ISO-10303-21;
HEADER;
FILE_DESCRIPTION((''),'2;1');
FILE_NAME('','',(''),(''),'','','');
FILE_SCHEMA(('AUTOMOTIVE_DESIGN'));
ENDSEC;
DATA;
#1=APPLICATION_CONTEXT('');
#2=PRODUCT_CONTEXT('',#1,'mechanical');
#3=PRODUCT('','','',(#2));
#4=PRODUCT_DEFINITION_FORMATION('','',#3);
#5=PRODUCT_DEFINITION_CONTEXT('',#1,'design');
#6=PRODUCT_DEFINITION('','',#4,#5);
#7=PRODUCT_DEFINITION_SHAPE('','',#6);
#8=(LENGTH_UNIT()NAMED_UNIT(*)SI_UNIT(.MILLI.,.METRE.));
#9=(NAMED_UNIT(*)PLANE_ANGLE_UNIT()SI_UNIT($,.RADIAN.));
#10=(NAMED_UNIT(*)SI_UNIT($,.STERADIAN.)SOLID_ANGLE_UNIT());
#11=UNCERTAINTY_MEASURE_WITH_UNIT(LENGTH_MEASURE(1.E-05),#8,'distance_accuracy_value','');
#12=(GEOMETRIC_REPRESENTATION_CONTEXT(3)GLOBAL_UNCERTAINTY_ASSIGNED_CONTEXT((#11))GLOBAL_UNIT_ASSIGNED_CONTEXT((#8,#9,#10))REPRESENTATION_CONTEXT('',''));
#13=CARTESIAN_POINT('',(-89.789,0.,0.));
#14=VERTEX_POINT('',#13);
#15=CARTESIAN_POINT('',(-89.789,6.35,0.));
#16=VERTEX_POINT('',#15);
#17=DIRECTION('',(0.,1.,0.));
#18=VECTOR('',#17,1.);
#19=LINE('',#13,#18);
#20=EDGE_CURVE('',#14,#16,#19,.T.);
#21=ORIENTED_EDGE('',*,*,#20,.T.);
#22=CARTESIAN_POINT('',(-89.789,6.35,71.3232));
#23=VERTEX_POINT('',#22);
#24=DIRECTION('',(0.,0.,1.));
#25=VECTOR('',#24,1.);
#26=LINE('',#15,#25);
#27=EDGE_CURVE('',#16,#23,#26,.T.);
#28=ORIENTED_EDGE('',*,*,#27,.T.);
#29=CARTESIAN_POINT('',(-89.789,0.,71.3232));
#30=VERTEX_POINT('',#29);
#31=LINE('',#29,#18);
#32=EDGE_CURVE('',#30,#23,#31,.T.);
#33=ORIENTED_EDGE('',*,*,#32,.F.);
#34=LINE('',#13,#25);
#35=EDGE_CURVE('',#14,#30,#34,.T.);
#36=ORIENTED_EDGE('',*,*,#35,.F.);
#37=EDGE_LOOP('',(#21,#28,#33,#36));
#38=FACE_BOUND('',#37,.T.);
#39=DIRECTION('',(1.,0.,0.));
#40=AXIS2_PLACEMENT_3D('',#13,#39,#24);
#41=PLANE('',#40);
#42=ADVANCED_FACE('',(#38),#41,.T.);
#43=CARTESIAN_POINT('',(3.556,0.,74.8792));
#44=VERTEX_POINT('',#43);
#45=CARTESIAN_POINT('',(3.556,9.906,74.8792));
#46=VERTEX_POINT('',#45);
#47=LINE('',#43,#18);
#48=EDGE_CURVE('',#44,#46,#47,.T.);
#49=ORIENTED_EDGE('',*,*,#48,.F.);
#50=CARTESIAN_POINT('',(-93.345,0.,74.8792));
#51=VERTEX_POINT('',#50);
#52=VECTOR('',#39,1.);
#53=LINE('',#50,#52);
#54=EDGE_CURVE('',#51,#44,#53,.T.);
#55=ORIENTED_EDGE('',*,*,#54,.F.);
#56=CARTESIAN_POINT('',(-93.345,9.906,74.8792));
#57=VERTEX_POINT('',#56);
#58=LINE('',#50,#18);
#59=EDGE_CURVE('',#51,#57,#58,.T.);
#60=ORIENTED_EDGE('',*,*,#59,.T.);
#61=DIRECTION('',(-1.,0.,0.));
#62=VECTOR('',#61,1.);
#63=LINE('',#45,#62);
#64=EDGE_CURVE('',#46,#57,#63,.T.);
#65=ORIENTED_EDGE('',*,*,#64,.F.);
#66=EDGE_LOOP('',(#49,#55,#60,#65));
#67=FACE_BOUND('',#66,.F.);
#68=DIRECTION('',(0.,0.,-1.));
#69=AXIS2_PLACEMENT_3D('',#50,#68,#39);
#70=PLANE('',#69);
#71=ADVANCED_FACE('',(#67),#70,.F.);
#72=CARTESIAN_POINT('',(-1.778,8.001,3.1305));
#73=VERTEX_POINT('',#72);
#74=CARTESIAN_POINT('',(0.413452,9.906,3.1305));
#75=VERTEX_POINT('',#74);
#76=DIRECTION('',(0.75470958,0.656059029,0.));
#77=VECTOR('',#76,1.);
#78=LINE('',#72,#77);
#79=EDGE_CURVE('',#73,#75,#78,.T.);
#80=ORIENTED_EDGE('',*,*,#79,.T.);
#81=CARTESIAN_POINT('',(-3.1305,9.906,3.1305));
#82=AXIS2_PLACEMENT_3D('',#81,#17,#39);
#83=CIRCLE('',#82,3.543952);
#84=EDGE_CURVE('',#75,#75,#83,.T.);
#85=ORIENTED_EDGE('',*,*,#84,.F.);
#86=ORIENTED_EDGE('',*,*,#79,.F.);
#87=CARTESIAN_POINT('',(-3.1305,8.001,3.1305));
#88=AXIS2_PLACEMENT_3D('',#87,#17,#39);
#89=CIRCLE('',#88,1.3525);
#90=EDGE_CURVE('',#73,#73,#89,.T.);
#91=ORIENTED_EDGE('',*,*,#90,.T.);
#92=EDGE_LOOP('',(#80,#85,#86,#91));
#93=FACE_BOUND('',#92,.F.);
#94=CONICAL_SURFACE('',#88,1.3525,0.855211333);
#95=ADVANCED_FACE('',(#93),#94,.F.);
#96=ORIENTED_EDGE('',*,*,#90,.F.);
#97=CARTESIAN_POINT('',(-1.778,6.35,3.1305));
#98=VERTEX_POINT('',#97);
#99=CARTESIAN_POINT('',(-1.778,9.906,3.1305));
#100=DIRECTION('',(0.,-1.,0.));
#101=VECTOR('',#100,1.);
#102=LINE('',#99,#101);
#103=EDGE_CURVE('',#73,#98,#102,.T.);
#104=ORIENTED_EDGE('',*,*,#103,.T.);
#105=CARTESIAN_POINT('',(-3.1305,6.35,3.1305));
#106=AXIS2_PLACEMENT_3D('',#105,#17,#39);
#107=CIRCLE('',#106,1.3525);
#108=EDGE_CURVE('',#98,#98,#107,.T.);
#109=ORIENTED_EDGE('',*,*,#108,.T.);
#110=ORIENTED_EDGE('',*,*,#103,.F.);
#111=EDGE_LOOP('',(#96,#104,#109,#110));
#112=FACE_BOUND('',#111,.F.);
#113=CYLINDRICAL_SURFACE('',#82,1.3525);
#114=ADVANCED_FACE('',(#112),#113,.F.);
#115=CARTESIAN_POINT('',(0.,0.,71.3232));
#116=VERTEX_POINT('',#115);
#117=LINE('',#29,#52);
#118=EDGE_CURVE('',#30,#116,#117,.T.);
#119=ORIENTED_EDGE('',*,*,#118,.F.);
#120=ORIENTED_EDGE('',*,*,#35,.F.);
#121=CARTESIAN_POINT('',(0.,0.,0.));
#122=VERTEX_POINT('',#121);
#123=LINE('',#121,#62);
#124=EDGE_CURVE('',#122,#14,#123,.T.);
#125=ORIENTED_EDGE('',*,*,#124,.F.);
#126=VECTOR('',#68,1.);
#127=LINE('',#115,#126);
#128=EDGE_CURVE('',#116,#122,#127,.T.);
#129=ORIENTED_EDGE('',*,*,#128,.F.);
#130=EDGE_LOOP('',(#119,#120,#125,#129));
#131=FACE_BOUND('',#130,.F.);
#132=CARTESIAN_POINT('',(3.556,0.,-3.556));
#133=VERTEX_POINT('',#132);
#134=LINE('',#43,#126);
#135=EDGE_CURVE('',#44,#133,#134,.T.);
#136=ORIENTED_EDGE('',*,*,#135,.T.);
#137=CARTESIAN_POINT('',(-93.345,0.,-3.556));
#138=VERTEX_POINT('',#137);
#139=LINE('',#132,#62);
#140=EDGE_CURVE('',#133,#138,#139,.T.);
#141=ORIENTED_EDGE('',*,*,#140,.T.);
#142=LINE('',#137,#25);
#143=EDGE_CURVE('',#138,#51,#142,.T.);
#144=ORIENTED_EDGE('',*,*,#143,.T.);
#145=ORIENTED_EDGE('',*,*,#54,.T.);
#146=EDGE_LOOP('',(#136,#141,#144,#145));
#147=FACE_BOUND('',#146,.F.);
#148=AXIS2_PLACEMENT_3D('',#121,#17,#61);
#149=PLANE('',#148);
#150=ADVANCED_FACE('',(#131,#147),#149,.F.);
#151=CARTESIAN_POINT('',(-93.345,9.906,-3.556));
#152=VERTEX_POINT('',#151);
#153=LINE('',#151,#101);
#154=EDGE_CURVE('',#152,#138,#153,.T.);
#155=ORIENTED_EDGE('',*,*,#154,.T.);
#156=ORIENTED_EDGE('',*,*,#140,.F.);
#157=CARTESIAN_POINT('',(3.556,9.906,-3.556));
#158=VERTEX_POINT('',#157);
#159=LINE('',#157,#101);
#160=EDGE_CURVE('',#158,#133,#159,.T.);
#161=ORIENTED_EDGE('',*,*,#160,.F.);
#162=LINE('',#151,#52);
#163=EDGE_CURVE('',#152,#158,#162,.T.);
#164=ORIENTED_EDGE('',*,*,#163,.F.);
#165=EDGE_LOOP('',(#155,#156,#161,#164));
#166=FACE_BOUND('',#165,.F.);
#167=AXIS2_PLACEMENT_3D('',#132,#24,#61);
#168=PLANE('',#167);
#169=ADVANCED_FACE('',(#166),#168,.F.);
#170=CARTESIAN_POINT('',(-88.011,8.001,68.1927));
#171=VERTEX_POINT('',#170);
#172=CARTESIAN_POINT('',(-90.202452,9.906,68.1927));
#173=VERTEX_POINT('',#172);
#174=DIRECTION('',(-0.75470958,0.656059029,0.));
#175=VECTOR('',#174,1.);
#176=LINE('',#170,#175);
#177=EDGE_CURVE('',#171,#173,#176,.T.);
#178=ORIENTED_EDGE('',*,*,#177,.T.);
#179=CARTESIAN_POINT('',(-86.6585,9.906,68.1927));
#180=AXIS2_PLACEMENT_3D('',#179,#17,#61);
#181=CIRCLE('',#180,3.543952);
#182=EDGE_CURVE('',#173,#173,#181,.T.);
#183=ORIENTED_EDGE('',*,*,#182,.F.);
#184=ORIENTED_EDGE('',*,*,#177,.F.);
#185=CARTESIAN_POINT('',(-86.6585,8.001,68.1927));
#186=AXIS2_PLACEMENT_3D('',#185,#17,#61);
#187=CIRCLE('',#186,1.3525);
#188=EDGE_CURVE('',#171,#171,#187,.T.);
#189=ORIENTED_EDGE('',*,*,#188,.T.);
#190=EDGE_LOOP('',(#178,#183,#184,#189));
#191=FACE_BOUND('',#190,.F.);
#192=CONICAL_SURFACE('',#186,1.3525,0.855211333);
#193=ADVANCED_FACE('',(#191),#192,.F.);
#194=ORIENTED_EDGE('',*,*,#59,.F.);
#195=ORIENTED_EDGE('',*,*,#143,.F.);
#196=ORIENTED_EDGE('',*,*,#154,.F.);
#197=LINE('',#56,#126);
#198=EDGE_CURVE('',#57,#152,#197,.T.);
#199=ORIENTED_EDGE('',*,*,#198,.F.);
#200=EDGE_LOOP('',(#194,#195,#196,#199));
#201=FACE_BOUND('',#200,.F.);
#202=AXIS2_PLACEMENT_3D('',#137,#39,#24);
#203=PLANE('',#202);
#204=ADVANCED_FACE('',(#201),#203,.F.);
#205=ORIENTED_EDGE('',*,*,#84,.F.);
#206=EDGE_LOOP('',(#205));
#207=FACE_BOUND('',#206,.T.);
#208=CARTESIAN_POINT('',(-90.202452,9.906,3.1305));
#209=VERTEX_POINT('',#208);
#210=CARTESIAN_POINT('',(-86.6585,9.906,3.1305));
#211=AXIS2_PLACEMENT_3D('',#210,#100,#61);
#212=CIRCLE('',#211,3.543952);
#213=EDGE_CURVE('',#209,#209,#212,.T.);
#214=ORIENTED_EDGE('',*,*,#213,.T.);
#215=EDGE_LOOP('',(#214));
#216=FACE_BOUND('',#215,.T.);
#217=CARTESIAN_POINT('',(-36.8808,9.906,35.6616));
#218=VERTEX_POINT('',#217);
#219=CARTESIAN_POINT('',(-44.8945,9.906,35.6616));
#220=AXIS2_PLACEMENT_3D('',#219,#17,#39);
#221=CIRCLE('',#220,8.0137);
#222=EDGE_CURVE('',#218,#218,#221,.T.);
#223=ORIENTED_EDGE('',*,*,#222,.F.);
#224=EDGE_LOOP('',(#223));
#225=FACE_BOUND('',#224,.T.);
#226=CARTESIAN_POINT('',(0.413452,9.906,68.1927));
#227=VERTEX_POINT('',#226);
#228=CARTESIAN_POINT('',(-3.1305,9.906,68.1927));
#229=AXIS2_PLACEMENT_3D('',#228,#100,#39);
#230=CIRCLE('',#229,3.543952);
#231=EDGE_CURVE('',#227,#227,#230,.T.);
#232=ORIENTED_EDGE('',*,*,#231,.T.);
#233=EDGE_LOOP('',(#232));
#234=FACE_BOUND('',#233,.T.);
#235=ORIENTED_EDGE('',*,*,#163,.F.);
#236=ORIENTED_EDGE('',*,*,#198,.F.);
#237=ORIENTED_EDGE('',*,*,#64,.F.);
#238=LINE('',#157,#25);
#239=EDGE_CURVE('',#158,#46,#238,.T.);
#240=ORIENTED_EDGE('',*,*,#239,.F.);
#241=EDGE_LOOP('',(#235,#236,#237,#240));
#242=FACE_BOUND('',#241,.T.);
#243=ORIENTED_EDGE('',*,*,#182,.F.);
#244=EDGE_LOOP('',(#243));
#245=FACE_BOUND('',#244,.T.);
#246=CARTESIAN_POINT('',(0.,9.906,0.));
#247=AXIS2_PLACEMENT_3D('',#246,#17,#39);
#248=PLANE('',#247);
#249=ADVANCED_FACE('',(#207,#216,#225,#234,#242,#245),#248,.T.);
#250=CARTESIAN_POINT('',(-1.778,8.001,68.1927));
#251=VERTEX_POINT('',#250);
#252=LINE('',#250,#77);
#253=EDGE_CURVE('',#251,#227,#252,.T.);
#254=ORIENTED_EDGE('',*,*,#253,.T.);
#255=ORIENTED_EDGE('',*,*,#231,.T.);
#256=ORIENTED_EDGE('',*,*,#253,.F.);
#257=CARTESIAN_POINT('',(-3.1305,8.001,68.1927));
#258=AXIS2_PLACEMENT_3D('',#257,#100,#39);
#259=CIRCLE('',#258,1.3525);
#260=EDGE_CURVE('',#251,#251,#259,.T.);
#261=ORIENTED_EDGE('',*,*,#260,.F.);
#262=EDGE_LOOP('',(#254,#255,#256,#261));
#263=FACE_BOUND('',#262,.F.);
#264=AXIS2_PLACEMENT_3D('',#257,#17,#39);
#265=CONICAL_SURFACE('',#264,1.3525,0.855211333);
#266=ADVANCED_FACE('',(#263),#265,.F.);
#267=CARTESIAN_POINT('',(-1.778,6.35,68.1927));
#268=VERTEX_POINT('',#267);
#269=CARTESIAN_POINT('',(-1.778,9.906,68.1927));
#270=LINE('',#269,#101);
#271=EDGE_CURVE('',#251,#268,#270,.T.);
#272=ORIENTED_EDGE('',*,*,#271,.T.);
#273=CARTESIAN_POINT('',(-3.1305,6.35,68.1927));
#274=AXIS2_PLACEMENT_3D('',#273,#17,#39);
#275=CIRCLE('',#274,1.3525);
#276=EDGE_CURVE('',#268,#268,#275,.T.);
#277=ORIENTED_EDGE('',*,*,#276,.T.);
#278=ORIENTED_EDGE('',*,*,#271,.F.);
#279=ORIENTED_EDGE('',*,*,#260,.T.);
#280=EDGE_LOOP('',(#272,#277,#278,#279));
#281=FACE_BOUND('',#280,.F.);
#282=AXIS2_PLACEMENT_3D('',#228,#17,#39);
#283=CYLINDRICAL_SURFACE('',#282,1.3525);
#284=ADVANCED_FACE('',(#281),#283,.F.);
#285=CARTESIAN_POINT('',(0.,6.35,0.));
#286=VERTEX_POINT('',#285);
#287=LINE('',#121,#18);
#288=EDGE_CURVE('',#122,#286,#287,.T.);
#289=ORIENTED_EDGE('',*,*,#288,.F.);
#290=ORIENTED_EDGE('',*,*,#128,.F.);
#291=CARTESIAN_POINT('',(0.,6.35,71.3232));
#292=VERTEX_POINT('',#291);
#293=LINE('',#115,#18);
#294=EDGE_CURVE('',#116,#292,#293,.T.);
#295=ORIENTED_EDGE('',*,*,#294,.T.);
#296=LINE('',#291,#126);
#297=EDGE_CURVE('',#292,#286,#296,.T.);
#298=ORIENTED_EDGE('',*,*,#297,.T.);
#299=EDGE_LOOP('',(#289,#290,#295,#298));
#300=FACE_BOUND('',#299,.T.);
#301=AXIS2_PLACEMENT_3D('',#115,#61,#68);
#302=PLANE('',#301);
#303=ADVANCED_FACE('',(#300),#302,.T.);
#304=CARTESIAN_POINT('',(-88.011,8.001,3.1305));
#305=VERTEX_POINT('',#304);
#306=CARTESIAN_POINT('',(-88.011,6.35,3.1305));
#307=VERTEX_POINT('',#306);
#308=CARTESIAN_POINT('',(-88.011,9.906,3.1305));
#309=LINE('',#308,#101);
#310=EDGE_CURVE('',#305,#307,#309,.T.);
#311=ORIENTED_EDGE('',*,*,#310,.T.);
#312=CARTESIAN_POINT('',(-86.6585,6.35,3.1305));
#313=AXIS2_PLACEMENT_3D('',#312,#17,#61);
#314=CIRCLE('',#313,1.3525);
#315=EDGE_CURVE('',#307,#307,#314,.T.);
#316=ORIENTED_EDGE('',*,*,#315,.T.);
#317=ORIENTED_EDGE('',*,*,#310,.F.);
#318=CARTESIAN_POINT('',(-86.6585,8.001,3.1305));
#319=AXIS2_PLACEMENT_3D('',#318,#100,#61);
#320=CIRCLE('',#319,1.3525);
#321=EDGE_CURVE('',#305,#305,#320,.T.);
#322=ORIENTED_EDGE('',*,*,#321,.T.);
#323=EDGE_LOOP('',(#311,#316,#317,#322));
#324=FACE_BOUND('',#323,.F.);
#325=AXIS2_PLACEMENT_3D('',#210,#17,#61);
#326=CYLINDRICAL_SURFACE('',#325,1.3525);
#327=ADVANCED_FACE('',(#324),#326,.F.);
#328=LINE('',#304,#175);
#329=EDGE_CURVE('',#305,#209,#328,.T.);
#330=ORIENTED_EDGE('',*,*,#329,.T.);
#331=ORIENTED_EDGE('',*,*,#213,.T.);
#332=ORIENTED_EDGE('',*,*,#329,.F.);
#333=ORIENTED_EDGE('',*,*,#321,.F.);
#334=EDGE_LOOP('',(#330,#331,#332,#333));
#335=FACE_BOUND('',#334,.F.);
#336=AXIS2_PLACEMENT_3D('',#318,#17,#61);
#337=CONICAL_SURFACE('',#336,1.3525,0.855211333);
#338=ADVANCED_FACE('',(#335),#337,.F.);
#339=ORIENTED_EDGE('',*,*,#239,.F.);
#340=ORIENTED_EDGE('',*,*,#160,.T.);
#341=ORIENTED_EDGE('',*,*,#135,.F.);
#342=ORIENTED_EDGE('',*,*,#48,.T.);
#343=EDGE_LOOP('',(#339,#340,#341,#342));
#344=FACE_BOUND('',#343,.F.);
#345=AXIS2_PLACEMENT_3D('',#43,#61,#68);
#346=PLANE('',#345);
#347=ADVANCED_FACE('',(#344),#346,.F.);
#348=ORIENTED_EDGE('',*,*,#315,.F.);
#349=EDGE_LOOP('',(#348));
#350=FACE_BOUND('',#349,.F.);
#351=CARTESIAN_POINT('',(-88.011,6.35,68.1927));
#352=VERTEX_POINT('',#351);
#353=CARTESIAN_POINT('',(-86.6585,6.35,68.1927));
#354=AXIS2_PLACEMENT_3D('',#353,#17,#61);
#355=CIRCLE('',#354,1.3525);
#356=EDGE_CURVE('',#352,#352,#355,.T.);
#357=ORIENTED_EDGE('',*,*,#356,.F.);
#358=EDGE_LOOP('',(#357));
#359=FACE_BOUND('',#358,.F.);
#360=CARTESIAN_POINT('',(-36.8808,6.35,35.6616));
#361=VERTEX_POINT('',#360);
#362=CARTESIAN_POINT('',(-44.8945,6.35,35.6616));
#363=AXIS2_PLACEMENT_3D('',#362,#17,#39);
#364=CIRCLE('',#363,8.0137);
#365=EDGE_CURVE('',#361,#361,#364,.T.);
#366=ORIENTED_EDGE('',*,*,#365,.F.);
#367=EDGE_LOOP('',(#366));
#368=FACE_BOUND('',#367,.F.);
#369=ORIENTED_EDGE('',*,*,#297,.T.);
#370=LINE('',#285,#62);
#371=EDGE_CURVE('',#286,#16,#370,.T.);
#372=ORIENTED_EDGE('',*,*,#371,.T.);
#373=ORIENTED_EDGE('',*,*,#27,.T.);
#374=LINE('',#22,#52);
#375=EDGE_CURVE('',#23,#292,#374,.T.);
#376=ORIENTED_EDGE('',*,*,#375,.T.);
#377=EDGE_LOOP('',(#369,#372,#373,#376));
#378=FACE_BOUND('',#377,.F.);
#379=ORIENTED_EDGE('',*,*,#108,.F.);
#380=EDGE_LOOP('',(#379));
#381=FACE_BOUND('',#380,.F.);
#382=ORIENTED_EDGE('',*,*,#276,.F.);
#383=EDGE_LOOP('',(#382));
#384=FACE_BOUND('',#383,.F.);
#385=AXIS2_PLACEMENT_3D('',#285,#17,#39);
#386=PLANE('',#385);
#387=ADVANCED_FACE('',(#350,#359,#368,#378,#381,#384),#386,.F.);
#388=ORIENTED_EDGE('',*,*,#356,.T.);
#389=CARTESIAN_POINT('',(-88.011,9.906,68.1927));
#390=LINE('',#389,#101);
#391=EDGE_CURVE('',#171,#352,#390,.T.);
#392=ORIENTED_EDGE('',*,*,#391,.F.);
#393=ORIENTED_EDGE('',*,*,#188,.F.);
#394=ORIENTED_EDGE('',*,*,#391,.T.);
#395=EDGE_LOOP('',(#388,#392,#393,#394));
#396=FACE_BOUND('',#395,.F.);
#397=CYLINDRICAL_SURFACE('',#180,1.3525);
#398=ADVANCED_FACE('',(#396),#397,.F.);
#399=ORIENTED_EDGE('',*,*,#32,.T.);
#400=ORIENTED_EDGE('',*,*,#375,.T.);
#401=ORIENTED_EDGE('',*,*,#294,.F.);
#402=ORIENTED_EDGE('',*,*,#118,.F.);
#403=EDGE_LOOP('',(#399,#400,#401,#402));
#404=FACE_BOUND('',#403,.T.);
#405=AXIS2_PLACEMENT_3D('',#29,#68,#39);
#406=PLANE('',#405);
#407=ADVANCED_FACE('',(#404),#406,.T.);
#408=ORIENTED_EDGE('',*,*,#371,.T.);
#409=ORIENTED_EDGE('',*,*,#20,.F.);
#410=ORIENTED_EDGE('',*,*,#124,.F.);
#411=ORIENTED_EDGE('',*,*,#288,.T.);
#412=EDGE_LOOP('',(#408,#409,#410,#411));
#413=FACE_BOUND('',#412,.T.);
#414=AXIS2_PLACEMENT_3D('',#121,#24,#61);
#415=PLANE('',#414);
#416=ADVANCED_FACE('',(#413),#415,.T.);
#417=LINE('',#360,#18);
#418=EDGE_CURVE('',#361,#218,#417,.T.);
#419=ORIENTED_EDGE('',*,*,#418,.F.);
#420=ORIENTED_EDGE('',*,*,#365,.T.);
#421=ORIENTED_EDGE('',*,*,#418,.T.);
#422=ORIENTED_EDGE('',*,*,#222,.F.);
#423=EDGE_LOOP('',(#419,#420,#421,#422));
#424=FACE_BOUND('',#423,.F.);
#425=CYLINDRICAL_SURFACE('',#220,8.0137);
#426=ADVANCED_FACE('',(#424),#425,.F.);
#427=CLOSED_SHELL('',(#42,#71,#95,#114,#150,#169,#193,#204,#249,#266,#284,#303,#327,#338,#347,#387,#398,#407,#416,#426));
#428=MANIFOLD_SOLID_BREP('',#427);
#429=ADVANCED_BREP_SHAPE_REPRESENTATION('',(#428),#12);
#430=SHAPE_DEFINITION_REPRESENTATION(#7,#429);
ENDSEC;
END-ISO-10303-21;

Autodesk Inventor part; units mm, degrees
ref_plane "YZ Plane" through (0, 0, 0) normal (1, 0, 0) x (0, 1, 0)
ref_plane "XZ Plane" through (0, 0, 0) normal (0, 1, 0) x (-1, 0, 0)
ref_plane "XY Plane" through (0, 0, 0) normal (0, 0, 1) x (1, 0, 0)
sketch "Sketch1" plane through (0, 0, 0) normal (0, 1, 0) x (-1, 0, 0)
  line L0 (0, 0) -> (89.789, 0)
  line L1 (89.789, 0) -> (89.789, 71.3232)
  line L2 (89.789, 71.3232) -> (0, 71.3232)
  line L3 (0, 71.3232) -> (0, 0)
  line L4 (93.345, 74.8792) -> (-3.556, 74.8792)
  line L5 (-3.556, 74.8792) -> (-3.556, -3.556)
  line L6 (-3.556, -3.556) -> (93.345, -3.556)
  line L7 (93.345, -3.556) -> (93.345, 74.8792)
  dimension "d0" = 89.789
  dimension "d1" = 71.3232
  dimension "d2" = 3.556
  dimension "d3" = 3.556
  dimension "d4" = 3.556
  dimension "d5" = 3.556
extrude "Extrusion1" add sketch "Sketch1" along normal blind 6.35
sketch "Sketch2" plane through (0, 6.35, 0) normal (0, 1, 0) x (1, 0, 0)
  line L0 (-93.345, 3.556) -> (3.556, 3.556)
  line L1 (3.556, 3.556) -> (3.556, -74.8792)
  line L2 (3.556, -74.8792) -> (-93.345, -74.8792)
  line L3 (-93.345, -74.8792) -> (-93.345, 3.556)
  point P0 (0, 0)
  dimension "d8" = 78.4352
  dimension "d9" = 96.901
extrude "Extrusion2" add sketch "Sketch2" along normal blind 3.556
sketch "Sketch3" plane through (0, 9.906, 0) normal (0, 1, 0) x (1, 0, 0)
  circle A0 centre (-44.8945, -35.6616) radius 8.0137
  line L0 (-93.345, 3.556) -> (-93.345, -74.8792) projected
  line L1 (3.556, 3.556) -> (-93.345, 3.556) projected
  point P0 (0, 0)
  dimension "d12" = 48.4505
  dimension "d13" = 39.2176
  dimension "d14" = 16.0274
extrude "Extrusion3" cut sketch "Sketch3" against normal blind 3.556 and the other way blind 1.016
sketch "Sketch5" plane through (-93.345, 0, -3.556) normal (-1, 0, 0) x (0, 0, 1)
  line L0 (78.4352, 0) -> (0, 0) projected
  line L1 (78.4352, 0) -> (77.1652, 0)
  line L2 (77.1652, 0) -> (77.1652, -7.62)
  line L3 (77.1652, -7.62) -> (78.4352, -7.62)
  line L4 (78.4352, -7.62) -> (78.4352, 0)
  line L5 (77.1652, -7.62) -> (76.4032, -6.5318)
  line L6 (76.4032, -6.5318) -> (76.4032, -2.54)
  line L7 (76.4032, -2.54) -> (77.1652, -2.54)
  point P0 (3.556, 0)
  dimension "d19" = 1.27
  dimension "d20" = 7.62
  dimension "d21" = 35
  dimension "d22" = 5.08
  dimension "d23" = 0.762
sketch "Sketch7" plane through (0, 9.906, 0) normal (0, 1, 0) x (1, 0, 0)
  circle A0 centre (-3.1305, -3.1305) radius 1.3525
  line L0 (0, 0) -> (0, -71.3232) projected
  line L1 (-89.789, 0) -> (0, 0) projected
  circle A1 centre (-3.1305, -3.1305) radius 3.1306
  dimension "d40" = 2.7051
  dimension "d41" = 6.2611
extrude "Extrusion6" cut sketch "Sketch7" along normal mid plane 25.4 contours A0
chamfer "Chamfer1" distance 1.905 angle 49 1 edges at (-4.4831, 9.906, 3.1305) measured on face at (-1.7824, 7.5353, 3.2394)
ref_plane "Work Plane4" through (-44.8945, 0, -3.556) normal (-1, 0, 0) x (0, 0, 1)
ref_plane "Work Plane5" through (3.556, 0, 35.6616) normal (0, 0, -1) x (-1, 0, 0)
mirror "Mirror3" about plane through (3.556, 0, 35.6616) normal (0, 0, -1) of "Extrusion6", "Chamfer1"
mirror "Mirror4" about plane through (-44.8945, 0, -3.556) normal (-1, 0, 0) of "Extrusion6", "Chamfer1", "Mirror3"
equation "\"d3\" = d2"
equation "\"d4\" = d2"
equation "\"d5\" = d2"
equation "\"d8\" = d1 + 2 * d3"
equation "\"d9\" = d0 + 2 * d3"
equation "\"d10\" = d3"
equation "\"d12\" = 0.5 * d9"
equation "\"d13\" = 0.5 * d8"
equation "\"d15\" = d3"
equation "\"d47\" = -d2 - 0.5 * d0"
equation "\"d48\" = -0.5 * d1 - d2"
properties part number "Masterboxtop"
